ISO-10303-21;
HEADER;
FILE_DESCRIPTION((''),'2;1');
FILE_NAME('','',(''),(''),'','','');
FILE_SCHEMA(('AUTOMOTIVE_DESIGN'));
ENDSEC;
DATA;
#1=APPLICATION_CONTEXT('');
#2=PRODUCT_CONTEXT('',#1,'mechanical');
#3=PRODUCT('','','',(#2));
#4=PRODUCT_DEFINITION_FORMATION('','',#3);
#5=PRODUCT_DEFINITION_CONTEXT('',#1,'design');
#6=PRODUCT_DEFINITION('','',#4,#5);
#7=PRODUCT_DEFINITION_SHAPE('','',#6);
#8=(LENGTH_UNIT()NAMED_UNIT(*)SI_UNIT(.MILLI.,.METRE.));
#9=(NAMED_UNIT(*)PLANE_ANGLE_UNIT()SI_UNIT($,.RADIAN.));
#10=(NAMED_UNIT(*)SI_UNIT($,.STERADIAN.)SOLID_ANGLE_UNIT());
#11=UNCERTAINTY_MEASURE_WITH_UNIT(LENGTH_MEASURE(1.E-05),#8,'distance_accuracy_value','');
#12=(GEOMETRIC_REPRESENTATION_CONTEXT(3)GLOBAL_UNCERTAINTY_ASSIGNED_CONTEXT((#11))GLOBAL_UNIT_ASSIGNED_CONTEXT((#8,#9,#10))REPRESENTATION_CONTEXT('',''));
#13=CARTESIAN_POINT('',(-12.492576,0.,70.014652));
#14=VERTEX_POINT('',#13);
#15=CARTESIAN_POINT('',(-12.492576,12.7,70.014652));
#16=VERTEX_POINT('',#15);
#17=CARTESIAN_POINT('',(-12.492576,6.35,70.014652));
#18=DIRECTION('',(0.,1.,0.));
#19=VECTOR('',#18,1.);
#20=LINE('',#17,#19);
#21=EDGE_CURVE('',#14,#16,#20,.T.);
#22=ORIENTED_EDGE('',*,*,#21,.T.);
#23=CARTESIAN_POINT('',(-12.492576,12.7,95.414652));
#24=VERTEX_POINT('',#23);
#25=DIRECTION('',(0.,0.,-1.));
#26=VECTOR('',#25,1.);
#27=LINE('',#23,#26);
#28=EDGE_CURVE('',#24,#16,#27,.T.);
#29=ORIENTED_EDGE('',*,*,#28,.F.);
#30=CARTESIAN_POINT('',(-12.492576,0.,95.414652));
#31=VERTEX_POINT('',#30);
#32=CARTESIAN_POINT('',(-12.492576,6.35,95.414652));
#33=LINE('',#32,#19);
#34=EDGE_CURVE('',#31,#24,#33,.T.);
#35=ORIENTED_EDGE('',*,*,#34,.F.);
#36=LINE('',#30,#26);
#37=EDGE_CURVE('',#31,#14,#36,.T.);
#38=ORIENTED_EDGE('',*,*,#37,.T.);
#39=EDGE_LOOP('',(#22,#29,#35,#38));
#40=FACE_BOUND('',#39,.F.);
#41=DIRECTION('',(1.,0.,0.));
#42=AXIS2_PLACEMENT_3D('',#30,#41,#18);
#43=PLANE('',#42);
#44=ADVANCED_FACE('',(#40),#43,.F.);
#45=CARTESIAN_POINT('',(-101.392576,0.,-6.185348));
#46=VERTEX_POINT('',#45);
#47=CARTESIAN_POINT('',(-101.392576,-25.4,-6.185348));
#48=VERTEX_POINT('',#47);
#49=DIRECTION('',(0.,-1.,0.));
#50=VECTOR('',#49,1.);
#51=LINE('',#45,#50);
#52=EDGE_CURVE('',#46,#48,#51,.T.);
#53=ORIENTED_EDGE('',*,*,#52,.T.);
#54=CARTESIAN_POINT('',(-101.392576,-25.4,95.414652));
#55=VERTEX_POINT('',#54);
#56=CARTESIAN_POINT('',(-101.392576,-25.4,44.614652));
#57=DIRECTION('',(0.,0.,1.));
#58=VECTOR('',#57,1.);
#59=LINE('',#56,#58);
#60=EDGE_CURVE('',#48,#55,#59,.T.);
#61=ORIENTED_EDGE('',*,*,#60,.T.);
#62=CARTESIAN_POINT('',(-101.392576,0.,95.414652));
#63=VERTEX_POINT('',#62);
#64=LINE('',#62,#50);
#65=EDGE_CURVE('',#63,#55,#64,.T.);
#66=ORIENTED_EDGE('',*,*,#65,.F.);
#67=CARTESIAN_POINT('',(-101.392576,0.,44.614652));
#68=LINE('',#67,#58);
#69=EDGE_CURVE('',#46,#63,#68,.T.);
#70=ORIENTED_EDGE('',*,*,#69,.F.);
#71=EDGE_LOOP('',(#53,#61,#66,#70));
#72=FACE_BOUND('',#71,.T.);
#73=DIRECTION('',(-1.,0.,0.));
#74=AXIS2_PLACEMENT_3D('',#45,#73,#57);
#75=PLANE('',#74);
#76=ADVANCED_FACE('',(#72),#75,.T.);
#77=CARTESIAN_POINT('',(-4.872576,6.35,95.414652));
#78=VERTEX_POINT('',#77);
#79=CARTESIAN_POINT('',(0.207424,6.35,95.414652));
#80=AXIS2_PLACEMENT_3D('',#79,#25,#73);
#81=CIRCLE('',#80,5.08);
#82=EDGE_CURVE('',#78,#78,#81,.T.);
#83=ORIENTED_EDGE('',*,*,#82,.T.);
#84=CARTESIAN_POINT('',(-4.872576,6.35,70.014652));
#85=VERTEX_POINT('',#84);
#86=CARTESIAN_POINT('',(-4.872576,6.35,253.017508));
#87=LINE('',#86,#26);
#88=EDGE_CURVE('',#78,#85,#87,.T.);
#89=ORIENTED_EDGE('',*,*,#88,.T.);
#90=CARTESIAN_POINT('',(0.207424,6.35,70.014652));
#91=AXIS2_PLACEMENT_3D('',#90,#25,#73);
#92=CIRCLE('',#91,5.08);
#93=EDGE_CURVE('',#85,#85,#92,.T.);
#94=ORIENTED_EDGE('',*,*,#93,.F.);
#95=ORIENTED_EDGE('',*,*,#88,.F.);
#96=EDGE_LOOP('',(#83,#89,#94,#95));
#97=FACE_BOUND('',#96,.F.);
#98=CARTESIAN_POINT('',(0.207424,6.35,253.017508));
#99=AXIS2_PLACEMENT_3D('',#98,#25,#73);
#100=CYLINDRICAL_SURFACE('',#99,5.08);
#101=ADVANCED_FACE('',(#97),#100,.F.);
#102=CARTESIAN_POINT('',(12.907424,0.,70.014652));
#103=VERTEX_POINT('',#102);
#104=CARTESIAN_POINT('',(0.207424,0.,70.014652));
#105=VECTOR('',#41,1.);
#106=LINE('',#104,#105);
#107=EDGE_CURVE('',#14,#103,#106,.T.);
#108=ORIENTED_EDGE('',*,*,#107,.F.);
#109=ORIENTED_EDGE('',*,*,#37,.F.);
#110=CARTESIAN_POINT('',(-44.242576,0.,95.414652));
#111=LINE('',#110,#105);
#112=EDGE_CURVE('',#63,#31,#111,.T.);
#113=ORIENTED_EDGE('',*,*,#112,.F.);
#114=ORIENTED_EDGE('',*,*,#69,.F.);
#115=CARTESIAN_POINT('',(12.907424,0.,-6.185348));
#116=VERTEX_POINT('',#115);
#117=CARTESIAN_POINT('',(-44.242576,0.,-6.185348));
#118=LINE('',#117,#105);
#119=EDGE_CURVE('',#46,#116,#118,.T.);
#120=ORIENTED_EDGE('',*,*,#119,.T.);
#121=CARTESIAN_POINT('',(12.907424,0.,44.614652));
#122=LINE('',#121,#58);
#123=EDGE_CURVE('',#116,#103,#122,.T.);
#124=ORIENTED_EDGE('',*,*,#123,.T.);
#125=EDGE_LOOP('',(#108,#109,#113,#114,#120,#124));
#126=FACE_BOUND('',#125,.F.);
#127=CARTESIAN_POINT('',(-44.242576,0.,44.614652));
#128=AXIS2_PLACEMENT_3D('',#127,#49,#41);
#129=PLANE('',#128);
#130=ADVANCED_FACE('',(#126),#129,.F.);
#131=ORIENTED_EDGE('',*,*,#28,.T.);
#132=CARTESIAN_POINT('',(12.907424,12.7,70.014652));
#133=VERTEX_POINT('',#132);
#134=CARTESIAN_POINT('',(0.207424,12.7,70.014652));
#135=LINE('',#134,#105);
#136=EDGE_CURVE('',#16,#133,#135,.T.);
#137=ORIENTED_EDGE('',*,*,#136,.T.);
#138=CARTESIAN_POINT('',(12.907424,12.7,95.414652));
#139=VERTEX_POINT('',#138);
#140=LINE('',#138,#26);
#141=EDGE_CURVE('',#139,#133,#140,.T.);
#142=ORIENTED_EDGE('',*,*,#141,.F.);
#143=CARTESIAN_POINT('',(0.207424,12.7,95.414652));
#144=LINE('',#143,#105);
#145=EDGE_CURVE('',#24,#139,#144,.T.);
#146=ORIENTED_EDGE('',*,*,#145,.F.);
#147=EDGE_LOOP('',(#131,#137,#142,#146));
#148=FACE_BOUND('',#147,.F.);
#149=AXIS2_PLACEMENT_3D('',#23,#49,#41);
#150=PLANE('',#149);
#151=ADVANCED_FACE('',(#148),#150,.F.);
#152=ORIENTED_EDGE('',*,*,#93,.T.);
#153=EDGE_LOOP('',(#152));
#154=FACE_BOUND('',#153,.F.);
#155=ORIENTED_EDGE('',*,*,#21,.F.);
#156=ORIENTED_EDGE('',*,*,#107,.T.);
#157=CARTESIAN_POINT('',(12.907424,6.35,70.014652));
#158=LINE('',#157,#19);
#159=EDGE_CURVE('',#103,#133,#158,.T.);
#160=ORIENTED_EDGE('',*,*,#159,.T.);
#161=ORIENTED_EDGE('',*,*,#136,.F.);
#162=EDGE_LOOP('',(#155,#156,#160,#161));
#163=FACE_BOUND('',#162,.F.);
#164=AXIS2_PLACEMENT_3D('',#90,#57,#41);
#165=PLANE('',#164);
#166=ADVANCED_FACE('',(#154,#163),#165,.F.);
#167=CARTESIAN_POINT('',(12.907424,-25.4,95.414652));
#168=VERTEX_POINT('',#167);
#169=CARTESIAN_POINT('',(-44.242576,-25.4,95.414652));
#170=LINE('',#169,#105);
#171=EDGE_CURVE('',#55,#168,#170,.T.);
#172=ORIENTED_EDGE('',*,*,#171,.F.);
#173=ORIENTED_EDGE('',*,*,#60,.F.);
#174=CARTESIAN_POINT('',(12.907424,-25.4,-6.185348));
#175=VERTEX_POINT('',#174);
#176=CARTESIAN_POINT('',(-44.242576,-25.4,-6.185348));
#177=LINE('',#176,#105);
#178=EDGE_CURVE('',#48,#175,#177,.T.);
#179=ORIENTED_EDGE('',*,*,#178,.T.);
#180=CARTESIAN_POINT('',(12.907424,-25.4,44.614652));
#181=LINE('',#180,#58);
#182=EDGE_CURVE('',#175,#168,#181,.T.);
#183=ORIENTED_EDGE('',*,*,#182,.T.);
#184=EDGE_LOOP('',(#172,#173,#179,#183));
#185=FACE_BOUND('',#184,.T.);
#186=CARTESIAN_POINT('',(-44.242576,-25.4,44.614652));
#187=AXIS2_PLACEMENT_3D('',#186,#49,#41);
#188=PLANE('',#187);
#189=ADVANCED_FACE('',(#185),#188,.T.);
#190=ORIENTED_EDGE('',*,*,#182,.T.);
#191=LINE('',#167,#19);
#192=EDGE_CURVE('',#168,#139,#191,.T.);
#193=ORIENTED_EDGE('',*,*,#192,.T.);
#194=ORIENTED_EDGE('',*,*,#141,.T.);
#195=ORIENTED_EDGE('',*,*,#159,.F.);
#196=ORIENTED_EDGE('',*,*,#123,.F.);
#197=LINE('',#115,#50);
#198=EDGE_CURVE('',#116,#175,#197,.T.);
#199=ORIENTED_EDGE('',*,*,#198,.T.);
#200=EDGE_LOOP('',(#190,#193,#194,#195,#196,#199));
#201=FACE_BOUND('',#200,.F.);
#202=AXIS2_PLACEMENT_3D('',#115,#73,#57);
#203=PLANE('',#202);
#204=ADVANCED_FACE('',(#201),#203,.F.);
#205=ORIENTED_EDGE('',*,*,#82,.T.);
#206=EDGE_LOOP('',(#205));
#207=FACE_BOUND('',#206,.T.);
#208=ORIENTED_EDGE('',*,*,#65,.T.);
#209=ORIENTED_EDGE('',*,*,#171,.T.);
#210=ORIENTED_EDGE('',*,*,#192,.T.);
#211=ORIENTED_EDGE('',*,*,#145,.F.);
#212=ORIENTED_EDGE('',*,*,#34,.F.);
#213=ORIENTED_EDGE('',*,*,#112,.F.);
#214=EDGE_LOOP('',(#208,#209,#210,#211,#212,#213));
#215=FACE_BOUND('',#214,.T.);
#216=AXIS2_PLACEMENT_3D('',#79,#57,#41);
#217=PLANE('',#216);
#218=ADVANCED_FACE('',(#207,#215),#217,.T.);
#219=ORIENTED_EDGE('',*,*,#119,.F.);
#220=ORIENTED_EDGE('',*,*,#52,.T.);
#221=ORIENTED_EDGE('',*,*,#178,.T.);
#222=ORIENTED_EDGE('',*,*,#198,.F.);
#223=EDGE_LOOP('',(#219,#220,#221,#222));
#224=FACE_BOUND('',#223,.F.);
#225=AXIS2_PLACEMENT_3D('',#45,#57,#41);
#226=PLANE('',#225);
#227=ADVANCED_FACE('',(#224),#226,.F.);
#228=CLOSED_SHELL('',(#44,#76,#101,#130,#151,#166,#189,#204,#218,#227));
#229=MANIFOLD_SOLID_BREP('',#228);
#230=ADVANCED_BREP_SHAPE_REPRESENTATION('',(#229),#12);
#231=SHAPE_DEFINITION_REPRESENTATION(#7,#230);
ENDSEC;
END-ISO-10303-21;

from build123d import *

# Parameters (mm, degrees)
F0_W     = 114.3
F0_H     = 101.6
F1_DEPTH = 25.4
F2_W     = 25.4
F2_H     = 12.7
F3_DEPTH = 25.4
F7_D     = 10.16


# Not quite as in the source:
# - a feature of the source that left no trace in its solid (it failed there, or was rolled back) is left out


with BuildPart() as f1:
    # F0 (on Front) → F1 (new body)
    with BuildSketch(Plane.XZ):
        with Locations((-44.2425758362, 44.6146523613)):
            Rectangle(F0_W, F0_H)
    extrude(amount=F1_DEPTH)

    # F2 (on face) → F3 (join)
    with BuildSketch(Plane.XY.offset(95.4146523613)):
        with Locations((0.2074241638, 6.35)):
            Rectangle(F2_W, F2_H)
    extrude(amount=-F3_DEPTH)

    # F5: union 

    # F7 (through all)
    with Locations(Plane.XY.offset(95.4146523613)):
        with Locations((0.2074241638, 6.35)):
            Hole(F7_D / 2)


solid = f1.part
